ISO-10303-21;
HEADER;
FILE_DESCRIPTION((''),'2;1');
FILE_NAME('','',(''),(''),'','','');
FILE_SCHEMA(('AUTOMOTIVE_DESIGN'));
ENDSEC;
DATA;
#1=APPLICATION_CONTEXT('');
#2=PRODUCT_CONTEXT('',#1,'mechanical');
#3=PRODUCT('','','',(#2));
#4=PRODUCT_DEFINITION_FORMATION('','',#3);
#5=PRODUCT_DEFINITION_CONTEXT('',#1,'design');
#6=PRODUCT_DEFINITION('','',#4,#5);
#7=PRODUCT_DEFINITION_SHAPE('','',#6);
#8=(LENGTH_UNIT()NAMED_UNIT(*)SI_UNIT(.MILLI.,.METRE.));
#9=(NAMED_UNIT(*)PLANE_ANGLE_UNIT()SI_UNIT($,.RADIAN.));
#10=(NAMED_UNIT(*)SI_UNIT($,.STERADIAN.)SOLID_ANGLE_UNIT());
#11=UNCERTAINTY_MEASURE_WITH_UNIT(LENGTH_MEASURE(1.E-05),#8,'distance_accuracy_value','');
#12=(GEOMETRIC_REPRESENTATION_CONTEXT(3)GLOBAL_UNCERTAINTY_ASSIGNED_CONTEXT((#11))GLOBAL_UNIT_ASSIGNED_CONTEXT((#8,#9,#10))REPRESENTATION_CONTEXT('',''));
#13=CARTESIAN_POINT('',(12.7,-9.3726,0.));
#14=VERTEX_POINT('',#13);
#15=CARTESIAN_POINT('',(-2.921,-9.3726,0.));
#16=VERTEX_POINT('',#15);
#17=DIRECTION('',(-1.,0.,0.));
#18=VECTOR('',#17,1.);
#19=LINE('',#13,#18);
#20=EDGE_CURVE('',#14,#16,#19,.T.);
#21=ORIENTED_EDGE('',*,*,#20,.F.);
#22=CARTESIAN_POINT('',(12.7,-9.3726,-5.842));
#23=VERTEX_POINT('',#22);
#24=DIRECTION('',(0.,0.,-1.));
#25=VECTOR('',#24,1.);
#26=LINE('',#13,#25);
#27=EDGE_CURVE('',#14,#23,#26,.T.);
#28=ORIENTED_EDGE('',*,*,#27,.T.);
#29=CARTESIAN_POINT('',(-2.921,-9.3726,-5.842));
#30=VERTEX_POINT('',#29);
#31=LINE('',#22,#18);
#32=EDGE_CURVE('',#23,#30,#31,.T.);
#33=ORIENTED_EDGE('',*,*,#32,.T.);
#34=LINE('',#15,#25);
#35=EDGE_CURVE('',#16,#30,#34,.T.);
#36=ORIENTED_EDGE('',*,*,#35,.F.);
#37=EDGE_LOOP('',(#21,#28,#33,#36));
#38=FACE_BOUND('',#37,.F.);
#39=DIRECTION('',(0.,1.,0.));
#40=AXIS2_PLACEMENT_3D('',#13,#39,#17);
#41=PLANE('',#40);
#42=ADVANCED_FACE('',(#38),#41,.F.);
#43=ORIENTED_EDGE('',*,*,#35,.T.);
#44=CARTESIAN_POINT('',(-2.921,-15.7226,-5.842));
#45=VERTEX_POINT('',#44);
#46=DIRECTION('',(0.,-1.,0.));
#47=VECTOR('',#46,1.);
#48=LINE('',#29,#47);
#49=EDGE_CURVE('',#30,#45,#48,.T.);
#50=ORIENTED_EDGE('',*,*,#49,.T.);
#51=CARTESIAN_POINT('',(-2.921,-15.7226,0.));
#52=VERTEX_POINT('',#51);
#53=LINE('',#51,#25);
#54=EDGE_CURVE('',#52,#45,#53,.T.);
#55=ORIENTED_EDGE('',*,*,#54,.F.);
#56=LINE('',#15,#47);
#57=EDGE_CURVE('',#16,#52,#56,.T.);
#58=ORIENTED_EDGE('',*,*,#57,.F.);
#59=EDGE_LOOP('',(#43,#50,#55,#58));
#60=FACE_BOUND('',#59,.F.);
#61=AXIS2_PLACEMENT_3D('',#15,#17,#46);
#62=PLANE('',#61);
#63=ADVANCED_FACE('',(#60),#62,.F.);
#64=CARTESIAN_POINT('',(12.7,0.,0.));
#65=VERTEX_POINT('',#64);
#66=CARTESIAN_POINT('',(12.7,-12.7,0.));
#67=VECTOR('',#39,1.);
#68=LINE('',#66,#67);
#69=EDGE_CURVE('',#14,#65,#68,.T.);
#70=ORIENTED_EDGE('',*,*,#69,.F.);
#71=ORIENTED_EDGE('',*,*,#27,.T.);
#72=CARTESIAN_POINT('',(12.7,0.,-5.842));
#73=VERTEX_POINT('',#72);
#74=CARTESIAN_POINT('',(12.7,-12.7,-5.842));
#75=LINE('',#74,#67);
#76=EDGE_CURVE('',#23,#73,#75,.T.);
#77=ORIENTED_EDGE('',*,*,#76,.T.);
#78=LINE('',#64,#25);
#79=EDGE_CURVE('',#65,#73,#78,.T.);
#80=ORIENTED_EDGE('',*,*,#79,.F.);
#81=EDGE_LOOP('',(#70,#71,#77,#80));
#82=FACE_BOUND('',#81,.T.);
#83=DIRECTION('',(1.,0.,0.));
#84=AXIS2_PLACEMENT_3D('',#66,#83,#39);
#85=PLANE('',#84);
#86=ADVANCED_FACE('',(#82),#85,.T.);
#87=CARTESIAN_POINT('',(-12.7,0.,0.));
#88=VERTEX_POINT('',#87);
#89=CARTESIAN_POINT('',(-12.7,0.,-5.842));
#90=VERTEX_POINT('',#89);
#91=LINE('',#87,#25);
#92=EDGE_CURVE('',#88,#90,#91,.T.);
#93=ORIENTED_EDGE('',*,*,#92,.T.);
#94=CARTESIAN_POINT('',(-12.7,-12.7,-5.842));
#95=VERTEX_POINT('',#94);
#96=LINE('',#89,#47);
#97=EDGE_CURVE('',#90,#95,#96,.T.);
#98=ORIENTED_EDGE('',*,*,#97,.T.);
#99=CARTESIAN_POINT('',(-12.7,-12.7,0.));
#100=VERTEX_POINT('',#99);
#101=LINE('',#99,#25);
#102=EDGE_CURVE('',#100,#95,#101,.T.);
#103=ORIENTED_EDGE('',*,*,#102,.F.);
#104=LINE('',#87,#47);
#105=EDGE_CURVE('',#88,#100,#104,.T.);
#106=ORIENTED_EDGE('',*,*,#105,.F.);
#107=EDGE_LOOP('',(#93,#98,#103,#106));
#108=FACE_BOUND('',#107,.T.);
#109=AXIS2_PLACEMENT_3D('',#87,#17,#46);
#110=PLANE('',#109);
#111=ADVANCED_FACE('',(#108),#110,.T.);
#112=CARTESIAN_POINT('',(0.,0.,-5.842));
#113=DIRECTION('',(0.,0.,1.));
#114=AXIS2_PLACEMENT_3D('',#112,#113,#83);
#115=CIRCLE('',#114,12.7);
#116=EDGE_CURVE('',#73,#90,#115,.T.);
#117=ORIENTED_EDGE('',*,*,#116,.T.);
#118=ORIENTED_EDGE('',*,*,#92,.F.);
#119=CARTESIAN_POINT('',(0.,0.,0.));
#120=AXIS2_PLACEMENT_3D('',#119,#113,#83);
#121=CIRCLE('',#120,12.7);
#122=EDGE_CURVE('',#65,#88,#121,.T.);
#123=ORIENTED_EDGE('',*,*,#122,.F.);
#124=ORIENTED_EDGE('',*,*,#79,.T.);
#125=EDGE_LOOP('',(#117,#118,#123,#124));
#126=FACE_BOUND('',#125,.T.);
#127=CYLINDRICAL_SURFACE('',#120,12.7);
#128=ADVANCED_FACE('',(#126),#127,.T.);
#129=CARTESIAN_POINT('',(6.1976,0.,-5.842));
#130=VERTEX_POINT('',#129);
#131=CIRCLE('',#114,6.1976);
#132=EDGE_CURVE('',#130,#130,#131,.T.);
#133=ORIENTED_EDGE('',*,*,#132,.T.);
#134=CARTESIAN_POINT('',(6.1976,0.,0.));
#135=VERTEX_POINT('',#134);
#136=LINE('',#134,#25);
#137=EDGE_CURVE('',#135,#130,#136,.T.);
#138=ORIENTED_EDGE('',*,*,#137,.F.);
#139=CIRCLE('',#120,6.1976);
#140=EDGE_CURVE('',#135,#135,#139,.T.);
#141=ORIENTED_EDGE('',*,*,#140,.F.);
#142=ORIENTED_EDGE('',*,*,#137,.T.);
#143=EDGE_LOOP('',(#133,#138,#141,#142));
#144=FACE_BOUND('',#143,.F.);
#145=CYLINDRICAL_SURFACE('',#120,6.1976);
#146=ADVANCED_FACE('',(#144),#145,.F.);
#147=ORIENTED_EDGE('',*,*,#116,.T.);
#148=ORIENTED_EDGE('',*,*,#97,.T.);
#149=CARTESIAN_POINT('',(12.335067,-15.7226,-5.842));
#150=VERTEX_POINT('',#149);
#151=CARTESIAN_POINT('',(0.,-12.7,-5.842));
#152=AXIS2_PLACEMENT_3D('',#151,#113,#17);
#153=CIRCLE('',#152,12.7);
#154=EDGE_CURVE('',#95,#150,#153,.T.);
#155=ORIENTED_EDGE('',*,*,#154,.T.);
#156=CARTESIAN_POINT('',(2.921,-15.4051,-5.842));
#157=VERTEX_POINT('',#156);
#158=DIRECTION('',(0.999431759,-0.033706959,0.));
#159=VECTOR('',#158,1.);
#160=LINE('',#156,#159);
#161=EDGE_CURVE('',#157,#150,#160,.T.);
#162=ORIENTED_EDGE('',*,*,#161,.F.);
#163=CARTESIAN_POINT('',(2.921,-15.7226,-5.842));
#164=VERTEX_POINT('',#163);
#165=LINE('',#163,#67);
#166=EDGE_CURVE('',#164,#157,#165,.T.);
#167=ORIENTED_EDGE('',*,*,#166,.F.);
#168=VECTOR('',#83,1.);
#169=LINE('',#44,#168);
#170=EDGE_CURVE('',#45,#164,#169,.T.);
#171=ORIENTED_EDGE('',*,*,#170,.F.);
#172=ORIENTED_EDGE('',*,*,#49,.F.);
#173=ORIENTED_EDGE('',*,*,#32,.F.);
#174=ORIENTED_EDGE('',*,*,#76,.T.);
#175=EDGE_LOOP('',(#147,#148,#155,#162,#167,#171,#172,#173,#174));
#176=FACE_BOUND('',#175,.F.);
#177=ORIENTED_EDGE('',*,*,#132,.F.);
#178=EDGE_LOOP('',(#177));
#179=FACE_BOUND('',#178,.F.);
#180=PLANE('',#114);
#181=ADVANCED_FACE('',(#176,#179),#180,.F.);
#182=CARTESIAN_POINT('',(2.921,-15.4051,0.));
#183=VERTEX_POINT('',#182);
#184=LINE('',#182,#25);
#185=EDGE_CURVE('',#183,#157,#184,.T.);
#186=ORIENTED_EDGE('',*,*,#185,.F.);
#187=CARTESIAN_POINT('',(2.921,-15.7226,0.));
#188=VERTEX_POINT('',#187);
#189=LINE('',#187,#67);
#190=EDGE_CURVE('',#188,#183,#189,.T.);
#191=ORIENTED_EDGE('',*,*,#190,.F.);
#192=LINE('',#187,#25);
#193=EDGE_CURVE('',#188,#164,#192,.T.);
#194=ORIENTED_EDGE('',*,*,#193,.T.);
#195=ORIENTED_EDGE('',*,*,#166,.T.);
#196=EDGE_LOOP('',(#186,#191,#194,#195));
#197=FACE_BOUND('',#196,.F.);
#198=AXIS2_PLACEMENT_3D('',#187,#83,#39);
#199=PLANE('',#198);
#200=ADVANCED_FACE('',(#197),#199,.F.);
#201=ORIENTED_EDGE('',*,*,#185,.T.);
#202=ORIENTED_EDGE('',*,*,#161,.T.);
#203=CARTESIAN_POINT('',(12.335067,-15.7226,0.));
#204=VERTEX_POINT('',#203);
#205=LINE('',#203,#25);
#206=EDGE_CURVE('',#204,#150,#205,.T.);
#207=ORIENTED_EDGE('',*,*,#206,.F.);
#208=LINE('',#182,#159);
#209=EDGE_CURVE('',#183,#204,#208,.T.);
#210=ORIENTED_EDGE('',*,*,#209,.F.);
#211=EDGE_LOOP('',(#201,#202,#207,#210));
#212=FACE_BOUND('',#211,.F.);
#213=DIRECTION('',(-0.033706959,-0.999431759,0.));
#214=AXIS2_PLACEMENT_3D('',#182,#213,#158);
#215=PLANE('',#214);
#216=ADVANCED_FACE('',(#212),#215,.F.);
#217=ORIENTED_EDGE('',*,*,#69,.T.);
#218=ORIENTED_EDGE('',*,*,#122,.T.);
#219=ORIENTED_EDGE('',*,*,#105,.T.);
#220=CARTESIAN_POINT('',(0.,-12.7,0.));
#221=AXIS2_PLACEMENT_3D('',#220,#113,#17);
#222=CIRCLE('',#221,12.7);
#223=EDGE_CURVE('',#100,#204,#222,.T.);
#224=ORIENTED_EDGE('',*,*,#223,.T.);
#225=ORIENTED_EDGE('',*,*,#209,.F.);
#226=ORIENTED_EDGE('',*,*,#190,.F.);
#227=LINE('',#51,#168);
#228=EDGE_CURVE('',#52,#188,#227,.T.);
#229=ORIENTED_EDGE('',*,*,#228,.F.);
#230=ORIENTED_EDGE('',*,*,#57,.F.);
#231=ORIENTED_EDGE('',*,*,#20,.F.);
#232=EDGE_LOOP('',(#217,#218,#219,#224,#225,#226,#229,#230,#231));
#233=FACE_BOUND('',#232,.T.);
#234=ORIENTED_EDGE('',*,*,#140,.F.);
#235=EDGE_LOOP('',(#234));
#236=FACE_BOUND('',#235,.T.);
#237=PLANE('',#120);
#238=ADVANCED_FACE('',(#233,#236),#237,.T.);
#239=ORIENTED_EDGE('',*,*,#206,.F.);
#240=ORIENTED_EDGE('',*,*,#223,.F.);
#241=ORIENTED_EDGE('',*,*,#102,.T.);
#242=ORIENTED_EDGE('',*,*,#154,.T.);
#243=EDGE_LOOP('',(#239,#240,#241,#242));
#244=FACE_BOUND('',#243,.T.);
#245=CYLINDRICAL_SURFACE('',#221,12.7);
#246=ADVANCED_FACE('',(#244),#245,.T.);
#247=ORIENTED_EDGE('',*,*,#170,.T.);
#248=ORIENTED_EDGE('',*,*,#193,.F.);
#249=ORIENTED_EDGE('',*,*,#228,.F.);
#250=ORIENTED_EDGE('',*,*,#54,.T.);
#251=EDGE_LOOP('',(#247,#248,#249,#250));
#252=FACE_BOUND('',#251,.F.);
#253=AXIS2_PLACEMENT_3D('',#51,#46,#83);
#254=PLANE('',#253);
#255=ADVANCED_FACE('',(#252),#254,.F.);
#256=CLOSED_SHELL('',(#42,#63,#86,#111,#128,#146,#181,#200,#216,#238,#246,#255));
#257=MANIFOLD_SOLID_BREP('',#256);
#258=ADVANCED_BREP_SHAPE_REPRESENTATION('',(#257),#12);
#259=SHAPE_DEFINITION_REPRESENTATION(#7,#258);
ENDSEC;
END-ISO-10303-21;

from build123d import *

# Parameters (mm, degrees)
F0_R     = 6.1976
F1_DEPTH = 5.842
F3_DEPTH = 5.842


# Not quite as in the source:
# - a feature names something its author has since deleted; it is built from what else it names


with BuildPart() as f1:
    # F0 (on Top) → F1 (new body)
    with BuildSketch(Plane.XY):
        with BuildLine():
            ThreePointArc((-12.7, 0), (0, -12.7), (12.7, 0))
            ThreePointArc((12.7, 0), (0, 12.7), (-12.7, 0))
        make_face()
        Circle(F0_R, mode=Mode.SUBTRACT)
        with BuildLine():
            Line((12.7, -12.7), (12.7, 0))
            ThreePointArc((12.7, 0), (0, -12.7), (-12.7, 0))
            Line((-12.7, 0), (-12.7, -12.7))
            ThreePointArc((-12.7, -12.7), (0, -25.4), (12.7, -12.7))
        make_face()
    extrude(amount=-F1_DEPTH)

    # F2 (on face) → F3 (cut, through all)
    with BuildSketch(Plane.XY):
        with BuildLine():
            Line((12.7, -9.3726), (-2.921, -9.3726))
            Line((-2.921, -9.3726), (-2.921, -15.7226))
            Line((-2.921, -15.7226), (2.921, -15.7226))
            Line((2.921, -15.7226), (2.921, -15.4051))
            Line((2.921, -15.4051), (12.3350674599, -15.7226))
            ThreePointArc((12.3350674599, -15.7226), (12.6084367933, -14.2222751491), (12.7, -12.7))
            Line((12.7, -12.7), (12.7, -9.3726))
        make_face()
    extrude(amount=-F3_DEPTH, mode=Mode.SUBTRACT)


solid = f1.part
